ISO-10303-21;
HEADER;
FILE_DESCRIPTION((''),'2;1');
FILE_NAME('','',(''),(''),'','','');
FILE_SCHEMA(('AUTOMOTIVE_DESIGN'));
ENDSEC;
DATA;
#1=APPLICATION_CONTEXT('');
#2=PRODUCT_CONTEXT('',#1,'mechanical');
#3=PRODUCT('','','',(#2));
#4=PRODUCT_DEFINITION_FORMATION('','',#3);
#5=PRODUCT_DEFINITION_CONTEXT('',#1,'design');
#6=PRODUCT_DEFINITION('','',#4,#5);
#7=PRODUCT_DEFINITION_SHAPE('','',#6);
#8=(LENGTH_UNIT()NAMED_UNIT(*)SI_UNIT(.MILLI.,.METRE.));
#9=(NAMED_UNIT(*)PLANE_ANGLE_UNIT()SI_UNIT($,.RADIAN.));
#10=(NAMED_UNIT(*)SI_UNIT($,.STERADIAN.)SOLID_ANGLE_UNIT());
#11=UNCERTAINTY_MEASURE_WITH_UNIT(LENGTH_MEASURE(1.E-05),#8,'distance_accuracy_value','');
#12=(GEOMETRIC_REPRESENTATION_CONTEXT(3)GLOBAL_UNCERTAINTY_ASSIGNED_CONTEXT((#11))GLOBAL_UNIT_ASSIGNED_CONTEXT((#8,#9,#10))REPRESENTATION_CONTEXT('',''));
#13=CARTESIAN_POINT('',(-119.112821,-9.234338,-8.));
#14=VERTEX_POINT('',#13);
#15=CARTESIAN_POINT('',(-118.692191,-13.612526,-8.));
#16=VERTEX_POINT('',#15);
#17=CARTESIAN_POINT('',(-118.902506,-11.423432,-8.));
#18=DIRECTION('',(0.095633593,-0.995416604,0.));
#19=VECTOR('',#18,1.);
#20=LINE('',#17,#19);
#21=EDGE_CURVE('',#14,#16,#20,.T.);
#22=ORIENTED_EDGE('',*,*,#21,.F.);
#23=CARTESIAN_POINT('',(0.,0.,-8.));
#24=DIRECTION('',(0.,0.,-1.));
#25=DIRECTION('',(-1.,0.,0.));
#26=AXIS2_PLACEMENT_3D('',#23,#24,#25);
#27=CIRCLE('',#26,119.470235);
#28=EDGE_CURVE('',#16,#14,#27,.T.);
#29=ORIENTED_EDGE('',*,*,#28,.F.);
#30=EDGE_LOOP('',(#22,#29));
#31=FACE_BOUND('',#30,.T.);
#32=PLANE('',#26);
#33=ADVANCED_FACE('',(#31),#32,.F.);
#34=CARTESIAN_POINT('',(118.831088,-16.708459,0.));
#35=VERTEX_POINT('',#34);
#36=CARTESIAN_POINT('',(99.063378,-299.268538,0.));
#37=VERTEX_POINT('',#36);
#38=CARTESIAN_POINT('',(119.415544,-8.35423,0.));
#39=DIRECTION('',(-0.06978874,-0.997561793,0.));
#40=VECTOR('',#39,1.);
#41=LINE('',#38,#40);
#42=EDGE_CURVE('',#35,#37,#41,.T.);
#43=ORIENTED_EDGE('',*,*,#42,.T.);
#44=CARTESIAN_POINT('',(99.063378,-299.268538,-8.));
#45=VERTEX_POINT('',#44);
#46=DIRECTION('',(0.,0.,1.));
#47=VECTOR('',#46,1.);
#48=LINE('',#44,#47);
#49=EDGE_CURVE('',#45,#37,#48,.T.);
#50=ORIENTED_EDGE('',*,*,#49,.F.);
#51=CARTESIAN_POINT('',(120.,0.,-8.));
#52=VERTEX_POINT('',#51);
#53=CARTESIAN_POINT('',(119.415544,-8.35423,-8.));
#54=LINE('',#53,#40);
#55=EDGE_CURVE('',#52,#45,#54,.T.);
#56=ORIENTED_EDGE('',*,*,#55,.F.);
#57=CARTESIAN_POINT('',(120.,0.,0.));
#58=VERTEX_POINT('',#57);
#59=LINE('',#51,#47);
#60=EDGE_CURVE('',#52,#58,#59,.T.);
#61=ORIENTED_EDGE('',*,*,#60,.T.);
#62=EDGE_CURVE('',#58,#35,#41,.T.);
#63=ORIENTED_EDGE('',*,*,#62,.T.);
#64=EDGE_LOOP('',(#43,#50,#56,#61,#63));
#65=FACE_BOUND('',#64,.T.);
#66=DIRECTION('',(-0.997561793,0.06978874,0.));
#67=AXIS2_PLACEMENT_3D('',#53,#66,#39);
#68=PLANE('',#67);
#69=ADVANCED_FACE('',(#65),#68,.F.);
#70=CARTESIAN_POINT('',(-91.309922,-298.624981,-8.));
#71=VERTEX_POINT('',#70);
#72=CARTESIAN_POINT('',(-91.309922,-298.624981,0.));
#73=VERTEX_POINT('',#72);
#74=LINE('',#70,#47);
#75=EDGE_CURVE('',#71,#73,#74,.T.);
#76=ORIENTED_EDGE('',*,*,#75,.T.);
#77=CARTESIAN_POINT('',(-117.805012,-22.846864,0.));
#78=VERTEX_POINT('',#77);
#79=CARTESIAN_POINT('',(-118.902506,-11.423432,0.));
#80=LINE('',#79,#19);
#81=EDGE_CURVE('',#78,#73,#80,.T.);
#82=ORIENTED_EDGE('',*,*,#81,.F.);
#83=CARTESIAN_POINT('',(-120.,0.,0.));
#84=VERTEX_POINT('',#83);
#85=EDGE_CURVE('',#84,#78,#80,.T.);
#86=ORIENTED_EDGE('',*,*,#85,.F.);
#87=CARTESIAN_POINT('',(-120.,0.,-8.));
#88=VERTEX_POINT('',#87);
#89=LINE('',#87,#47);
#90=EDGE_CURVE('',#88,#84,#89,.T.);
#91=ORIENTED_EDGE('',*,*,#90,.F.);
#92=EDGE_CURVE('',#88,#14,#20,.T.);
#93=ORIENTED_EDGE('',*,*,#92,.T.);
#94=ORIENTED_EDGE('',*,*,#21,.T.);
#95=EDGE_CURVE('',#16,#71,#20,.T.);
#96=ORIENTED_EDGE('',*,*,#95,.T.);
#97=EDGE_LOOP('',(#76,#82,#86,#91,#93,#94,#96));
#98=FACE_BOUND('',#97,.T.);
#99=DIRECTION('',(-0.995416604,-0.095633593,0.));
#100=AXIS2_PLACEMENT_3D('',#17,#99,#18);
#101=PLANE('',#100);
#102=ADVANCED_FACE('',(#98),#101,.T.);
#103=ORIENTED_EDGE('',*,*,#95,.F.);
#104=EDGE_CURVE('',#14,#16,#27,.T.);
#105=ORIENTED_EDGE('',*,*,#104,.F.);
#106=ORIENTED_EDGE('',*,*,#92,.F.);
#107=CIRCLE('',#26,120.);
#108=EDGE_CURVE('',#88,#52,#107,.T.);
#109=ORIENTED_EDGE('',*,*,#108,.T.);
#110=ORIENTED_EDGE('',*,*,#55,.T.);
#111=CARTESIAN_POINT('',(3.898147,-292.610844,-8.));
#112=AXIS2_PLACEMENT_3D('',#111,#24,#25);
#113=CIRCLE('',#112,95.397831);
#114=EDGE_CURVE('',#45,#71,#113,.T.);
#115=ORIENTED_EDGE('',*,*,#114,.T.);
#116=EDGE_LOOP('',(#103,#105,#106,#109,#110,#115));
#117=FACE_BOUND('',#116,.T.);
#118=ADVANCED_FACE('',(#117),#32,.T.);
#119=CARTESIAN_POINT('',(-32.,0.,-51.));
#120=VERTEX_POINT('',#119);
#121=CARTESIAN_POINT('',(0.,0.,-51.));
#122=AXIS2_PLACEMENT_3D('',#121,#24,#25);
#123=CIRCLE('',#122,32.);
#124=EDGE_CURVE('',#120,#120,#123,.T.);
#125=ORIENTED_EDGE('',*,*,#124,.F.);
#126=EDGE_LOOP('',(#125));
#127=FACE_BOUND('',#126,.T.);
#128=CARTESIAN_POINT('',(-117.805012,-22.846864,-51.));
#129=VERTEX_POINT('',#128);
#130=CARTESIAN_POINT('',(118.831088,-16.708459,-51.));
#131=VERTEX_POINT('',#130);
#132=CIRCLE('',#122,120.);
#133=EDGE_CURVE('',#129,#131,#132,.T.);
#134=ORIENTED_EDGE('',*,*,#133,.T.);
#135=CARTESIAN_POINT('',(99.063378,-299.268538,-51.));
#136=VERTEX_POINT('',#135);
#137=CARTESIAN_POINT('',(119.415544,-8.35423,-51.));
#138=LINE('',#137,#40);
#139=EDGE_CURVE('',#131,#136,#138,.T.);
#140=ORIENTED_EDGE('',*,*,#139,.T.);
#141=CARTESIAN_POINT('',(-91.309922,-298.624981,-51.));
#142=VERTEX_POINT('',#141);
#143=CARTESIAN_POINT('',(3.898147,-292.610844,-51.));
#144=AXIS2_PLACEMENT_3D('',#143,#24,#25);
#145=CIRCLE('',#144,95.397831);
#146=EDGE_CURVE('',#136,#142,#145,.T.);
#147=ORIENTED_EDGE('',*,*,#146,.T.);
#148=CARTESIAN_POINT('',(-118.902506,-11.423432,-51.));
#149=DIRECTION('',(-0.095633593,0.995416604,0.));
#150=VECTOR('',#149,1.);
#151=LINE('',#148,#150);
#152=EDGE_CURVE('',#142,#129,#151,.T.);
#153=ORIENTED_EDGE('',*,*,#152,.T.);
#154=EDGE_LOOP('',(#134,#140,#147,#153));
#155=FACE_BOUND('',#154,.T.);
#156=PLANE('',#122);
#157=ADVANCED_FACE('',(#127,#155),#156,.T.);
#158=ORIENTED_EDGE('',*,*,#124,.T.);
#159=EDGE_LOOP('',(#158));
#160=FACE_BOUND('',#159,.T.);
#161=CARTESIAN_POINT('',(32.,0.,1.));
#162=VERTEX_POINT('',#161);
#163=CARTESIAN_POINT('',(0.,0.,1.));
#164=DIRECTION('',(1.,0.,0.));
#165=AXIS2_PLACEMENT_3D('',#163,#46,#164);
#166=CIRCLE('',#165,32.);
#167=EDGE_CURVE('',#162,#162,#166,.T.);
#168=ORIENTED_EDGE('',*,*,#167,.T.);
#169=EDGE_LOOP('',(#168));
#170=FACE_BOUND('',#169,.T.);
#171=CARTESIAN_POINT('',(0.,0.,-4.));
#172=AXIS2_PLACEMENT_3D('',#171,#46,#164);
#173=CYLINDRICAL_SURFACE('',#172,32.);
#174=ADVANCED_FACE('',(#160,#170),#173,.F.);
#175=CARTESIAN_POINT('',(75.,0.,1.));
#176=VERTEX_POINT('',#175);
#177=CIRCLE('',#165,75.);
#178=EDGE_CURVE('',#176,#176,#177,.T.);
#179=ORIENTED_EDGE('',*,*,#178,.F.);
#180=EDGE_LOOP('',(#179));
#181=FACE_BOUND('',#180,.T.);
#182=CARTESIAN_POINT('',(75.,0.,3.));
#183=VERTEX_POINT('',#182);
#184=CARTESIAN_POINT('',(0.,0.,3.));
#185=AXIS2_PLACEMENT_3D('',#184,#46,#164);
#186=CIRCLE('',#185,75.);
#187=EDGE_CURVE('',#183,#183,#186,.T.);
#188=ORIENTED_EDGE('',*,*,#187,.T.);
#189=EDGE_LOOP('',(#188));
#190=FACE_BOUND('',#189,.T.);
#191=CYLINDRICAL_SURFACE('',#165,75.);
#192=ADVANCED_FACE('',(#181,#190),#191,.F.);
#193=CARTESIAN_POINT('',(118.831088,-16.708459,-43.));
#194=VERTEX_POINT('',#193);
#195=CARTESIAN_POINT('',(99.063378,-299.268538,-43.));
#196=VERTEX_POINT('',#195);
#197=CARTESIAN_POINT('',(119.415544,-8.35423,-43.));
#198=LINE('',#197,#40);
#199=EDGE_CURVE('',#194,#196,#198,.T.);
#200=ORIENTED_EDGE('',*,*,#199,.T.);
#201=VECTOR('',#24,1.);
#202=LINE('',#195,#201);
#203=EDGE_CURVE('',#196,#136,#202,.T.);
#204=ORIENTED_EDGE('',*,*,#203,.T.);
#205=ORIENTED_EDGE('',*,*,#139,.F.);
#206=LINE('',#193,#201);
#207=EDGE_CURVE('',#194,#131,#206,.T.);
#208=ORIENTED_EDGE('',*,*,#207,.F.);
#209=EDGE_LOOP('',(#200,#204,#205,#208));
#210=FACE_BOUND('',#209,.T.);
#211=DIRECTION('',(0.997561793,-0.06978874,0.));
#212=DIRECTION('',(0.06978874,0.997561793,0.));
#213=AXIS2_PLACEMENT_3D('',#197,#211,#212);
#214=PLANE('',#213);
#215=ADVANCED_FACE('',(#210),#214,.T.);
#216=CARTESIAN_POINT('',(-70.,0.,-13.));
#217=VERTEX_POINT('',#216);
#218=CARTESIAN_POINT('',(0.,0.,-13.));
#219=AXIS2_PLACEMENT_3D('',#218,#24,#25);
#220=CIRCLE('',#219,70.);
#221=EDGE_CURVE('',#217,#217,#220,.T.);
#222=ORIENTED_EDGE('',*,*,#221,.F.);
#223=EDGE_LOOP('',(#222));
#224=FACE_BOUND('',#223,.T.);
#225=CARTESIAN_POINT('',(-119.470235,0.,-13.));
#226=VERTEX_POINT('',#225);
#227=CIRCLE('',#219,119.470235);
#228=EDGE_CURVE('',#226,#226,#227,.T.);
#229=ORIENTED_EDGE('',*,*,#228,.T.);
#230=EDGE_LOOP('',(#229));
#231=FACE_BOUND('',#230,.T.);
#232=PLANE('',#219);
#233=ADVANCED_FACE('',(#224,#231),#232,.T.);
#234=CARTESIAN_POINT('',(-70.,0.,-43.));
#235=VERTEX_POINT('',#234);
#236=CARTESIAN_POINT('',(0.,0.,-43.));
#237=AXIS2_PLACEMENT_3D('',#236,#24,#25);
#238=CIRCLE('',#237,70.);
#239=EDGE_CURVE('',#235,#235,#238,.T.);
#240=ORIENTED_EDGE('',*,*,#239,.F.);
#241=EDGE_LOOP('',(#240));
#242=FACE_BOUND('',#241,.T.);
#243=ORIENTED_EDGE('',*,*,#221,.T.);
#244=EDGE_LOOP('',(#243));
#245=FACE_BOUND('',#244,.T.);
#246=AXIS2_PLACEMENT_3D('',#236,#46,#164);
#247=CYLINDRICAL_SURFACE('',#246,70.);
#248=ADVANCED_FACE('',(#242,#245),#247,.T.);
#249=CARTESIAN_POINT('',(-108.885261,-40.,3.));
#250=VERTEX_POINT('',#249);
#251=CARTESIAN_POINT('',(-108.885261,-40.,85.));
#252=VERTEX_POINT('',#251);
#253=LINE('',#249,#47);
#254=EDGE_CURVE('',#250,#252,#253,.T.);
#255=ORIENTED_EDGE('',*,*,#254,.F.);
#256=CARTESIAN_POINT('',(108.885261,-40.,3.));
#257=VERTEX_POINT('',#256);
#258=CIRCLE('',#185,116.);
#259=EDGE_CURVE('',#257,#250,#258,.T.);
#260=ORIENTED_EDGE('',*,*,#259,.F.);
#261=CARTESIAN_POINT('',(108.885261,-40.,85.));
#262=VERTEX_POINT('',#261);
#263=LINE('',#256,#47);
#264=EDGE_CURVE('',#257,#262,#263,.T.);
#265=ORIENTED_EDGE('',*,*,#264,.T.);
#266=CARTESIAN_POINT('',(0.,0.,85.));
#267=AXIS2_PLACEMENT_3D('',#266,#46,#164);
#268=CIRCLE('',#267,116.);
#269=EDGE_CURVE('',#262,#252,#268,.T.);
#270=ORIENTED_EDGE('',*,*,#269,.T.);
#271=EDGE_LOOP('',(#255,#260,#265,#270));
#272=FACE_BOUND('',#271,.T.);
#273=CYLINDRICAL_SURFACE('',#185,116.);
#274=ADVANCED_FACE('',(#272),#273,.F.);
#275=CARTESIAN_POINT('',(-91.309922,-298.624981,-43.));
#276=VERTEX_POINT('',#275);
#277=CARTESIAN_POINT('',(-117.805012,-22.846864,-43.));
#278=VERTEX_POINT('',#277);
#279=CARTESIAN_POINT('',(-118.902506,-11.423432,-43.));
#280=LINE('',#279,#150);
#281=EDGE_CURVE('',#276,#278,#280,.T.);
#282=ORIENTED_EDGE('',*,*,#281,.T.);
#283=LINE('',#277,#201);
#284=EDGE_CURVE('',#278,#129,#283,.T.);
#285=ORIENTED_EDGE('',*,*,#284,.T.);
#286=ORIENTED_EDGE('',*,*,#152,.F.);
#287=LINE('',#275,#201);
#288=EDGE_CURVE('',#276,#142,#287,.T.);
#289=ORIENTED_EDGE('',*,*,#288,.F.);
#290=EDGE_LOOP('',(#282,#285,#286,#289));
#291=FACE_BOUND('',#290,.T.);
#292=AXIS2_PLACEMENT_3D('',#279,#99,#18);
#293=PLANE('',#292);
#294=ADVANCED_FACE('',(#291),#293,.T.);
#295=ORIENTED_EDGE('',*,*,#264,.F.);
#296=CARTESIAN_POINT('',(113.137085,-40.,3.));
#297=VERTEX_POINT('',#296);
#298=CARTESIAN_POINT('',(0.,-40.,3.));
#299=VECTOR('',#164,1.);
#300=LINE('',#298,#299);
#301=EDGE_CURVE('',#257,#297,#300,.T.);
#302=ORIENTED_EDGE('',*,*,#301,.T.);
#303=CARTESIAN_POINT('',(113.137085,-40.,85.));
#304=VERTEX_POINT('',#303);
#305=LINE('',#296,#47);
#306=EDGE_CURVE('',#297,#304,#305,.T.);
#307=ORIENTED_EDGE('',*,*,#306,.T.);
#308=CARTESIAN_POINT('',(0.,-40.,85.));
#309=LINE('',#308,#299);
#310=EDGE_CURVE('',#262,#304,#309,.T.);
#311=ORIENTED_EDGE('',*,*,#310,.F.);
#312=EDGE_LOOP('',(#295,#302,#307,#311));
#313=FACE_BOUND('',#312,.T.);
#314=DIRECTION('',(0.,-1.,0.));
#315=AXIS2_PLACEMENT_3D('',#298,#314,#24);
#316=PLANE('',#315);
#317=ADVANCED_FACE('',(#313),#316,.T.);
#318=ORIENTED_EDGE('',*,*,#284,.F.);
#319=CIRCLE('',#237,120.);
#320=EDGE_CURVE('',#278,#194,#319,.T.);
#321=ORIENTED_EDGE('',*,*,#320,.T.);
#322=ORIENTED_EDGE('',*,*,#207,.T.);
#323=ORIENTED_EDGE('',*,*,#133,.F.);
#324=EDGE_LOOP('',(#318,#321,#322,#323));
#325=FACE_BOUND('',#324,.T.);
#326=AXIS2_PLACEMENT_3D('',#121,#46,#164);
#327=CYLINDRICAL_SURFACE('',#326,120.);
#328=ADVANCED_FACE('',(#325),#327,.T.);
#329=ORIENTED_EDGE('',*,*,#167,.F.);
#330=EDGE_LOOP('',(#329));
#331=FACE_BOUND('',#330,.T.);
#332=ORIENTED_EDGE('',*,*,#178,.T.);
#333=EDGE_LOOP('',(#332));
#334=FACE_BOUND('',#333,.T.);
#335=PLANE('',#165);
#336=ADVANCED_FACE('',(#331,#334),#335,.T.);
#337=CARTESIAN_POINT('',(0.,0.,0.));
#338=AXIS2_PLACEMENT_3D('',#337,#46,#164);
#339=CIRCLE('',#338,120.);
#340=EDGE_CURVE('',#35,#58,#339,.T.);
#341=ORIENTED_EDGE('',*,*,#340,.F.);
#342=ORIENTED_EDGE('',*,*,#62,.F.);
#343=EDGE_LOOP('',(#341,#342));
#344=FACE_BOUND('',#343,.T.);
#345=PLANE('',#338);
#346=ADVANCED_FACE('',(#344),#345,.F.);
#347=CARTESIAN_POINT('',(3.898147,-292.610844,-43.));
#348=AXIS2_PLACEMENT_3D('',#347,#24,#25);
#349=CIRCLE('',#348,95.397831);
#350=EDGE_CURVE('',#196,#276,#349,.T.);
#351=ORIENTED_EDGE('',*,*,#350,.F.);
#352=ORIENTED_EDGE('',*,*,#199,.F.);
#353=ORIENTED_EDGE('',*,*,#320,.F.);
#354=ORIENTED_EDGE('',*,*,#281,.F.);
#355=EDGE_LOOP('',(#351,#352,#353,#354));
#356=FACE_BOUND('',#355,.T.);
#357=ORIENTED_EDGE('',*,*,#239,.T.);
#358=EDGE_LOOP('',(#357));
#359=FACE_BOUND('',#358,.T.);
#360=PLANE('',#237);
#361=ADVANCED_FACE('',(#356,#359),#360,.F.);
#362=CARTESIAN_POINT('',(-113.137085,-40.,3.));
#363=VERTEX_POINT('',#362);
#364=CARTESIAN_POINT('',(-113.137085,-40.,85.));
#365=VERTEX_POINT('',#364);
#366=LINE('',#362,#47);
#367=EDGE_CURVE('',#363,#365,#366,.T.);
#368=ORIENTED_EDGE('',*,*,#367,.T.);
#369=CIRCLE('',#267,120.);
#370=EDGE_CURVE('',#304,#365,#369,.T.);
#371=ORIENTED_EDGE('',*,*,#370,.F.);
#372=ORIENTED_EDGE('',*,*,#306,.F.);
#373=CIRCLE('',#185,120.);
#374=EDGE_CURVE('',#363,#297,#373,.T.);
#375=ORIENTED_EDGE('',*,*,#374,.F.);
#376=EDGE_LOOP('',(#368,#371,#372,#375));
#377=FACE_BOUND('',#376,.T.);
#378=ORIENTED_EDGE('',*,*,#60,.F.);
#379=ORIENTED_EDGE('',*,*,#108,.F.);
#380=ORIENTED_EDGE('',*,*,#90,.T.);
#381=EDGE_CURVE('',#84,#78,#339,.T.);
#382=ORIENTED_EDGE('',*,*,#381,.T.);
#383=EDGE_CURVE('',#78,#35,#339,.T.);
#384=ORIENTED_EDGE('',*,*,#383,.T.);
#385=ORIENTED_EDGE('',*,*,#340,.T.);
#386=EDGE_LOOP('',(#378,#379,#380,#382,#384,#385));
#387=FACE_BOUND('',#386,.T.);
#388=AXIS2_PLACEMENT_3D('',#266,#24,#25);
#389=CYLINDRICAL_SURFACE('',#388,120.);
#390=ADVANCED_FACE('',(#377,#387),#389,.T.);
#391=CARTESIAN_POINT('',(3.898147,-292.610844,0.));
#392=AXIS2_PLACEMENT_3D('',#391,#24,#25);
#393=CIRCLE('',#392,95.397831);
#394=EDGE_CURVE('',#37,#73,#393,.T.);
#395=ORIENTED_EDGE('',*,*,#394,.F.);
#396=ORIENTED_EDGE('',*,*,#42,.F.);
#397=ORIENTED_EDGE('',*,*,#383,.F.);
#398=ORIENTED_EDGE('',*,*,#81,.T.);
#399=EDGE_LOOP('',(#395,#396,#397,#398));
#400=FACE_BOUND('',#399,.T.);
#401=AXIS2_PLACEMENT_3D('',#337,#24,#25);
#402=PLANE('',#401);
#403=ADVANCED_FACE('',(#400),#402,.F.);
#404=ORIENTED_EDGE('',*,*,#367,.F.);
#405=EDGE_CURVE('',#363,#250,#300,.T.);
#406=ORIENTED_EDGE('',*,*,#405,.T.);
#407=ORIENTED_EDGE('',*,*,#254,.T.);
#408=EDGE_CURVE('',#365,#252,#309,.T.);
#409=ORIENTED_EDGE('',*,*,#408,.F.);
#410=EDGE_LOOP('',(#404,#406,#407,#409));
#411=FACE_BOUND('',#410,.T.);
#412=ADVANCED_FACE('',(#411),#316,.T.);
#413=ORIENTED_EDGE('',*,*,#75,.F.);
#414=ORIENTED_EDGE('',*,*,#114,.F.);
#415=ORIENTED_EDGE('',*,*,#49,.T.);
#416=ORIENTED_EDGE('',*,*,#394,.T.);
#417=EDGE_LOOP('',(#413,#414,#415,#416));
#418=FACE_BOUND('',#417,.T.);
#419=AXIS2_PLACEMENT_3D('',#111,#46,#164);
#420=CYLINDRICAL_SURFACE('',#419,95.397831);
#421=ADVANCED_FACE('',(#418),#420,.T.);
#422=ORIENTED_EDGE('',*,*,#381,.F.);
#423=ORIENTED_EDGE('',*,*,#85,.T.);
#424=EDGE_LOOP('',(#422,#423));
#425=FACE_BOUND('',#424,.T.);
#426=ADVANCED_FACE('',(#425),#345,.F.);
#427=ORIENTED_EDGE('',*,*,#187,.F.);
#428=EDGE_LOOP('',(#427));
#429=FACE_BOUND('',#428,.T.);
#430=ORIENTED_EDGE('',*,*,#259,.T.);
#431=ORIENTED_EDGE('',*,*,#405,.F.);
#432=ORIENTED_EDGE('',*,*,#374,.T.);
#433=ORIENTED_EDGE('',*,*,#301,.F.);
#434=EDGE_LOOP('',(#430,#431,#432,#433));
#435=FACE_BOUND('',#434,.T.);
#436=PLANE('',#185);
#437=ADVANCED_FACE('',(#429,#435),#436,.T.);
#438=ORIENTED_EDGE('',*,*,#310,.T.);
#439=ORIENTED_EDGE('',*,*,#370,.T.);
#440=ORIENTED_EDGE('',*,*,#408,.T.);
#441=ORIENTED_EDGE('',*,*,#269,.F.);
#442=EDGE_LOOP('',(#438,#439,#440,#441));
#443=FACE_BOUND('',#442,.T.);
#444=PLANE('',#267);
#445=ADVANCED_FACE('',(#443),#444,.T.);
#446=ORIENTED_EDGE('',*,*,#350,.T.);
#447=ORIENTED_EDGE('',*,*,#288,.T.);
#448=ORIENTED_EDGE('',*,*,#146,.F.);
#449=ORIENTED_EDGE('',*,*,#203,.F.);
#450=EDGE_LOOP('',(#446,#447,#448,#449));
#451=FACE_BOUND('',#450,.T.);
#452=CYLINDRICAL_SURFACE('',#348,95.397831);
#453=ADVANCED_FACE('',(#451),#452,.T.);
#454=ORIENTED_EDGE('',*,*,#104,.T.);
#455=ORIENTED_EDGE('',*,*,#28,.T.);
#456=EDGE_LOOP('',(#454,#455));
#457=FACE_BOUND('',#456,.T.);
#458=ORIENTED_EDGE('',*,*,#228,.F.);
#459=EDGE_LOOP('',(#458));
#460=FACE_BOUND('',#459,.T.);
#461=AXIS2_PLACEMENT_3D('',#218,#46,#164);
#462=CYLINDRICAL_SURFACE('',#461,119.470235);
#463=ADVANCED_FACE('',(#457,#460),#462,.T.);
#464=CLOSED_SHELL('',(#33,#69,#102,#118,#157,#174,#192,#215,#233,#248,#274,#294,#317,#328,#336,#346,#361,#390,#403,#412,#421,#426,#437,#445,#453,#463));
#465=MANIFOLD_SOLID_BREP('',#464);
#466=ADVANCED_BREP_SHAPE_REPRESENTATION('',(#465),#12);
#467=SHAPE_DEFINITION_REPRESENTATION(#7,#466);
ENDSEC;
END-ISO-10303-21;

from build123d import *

# Parameters (mm, degrees)
SKETCH2_R               = 120
BOSS_EXTRUDE2_DEPTH     = 85
CUT_EXTRUDE1_START      = -82
CUT_EXTRUDE1_DEPTH      = 82
CUT_EXTRUDE5_DEPTH      = 2
CUT_EXTRUDE5_DEPTH_BACK = 2
SKETCH8_R               = 75
SKETCH9_R               = 32
CUT_EXTRUDE6_DEPTH      = 5
SKETCH12_R              = 32
BOSS_EXTRUDE4_DEPTH     = 8
SKETCH13_R              = 119.470235088
BOSS_EXTRUDE5_DEPTH     = 5
SKETCH15_R              = 70
BOSS_EXTRUDE6_DEPTH     = 30
SKETCH16_R              = 120
BOSS_EXTRUDE7_DEPTH     = 8
CUT_EXTRUDE7_START      = -210
SKETCH19_R              = 32
CUT_EXTRUDE7_DEPTH      = 210
BOSS_EXTRUDE8_START     = -8
BOSS_EXTRUDE8_DEPTH     = 8


with BuildPart() as part:
    # Sketch2 → Boss-Extrude2 (new body)
    with BuildSketch(Plane.XY):
        Circle(SKETCH2_R)
    extrude(amount=BOSS_EXTRUDE2_DEPTH)

    # Sketch3 → Cut-Extrude1 (cut)
    with BuildSketch(Plane.XY.offset(85).offset(CUT_EXTRUDE1_START)):
        with BuildLine():
            Line((-108.885260711, -40), (-113.13708499, -40))
            ThreePointArc((-113.13708499, -40), (0, -120), (113.13708499, -40))
            Line((113.13708499, -40), (108.885260711, -40))
            ThreePointArc((108.885260711, -40), (0, 116), (-108.885260711, -40))
        make_face()
    extrude(amount=CUT_EXTRUDE1_DEPTH, mode=Mode.SUBTRACT)

    # Sketch8 → Cut-Extrude5 (cut, two sides: drawn at the far end of the back side and taken through both)
    with BuildSketch(Plane.XY.offset(3).offset(-CUT_EXTRUDE5_DEPTH_BACK)):
        Circle(SKETCH8_R)
    extrude(amount=CUT_EXTRUDE5_DEPTH + CUT_EXTRUDE5_DEPTH_BACK, mode=Mode.SUBTRACT)

    # Sketch9 → Cut-Extrude6 (cut)
    with BuildSketch(Plane.XY.offset(1)):
        Circle(SKETCH9_R)
    extrude(amount=-CUT_EXTRUDE6_DEPTH, mode=Mode.SUBTRACT)

    # Sketch12 → Boss-Extrude4 (add)
    with BuildSketch(Plane(origin=(0, 0, 0), x_dir=(-1, 0, 0), z_dir=(0, 0, -1))):
        with BuildLine():
            ThreePointArc((120, 0), (0, 120), (-120, 0))
            Line((-120, 0), (-99.063378042, -299.268538041))
            ThreePointArc((-99.063378042, -299.268538041), (-3.575656086, -388.008129656), (91.309922092, -298.624981255))
            Line((91.309922092, -298.624981255), (120, 0))
        make_face()
        Circle(SKETCH12_R, mode=Mode.SUBTRACT)
    extrude(amount=BOSS_EXTRUDE4_DEPTH)

    # Sketch13 → Boss-Extrude5 (add)
    with BuildSketch(Plane(origin=(0, 0, -8), x_dir=(-1, 0, 0), z_dir=(0, 0, -1))):
        Circle(SKETCH13_R)
    extrude(amount=BOSS_EXTRUDE5_DEPTH)

    # Sketch15 → Boss-Extrude6 (add)
    with BuildSketch(Plane(origin=(0, 0, -13), x_dir=(-1, 0, 0), z_dir=(0, 0, -1))):
        Circle(SKETCH15_R)
    extrude(amount=BOSS_EXTRUDE6_DEPTH)

    # Sketch16 → Boss-Extrude7 (add)
    with BuildSketch(Plane(origin=(0, 0, -43), x_dir=(-1, 0, 0), z_dir=(0, 0, -1))):
        Circle(SKETCH16_R)
    extrude(amount=BOSS_EXTRUDE7_DEPTH)

    # Sketch19 → Cut-Extrude7 (cut)
    with BuildSketch(Plane(origin=(0, 0, -51), x_dir=(-1, 0, 0), z_dir=(0, 0, -1)).offset(CUT_EXTRUDE7_START)):
        Circle(SKETCH19_R)
    extrude(amount=CUT_EXTRUDE7_DEPTH, mode=Mode.SUBTRACT)

    # Sketch20 → Boss-Extrude8 (add)
    with BuildSketch(Plane(origin=(0, 0, -51), x_dir=(-1, 0, 0), z_dir=(0, 0, -1)).offset(BOSS_EXTRUDE8_START)):
        with BuildLine():
            ThreePointArc((117.805011812, -22.84686394), (-3.111785776, -119.959646504), (-118.831087629, -16.70845932))
            Line((-118.831087629, -16.70845932), (-99.063378042, -299.268538041))
            ThreePointArc((-99.063378042, -299.268538041), (-3.575656086, -388.008129656), (91.309922092, -298.624981255))
            Line((91.309922092, -298.624981255), (117.805011812, -22.84686394))
        make_face()
    extrude(amount=BOSS_EXTRUDE8_DEPTH)


solid = part.part
